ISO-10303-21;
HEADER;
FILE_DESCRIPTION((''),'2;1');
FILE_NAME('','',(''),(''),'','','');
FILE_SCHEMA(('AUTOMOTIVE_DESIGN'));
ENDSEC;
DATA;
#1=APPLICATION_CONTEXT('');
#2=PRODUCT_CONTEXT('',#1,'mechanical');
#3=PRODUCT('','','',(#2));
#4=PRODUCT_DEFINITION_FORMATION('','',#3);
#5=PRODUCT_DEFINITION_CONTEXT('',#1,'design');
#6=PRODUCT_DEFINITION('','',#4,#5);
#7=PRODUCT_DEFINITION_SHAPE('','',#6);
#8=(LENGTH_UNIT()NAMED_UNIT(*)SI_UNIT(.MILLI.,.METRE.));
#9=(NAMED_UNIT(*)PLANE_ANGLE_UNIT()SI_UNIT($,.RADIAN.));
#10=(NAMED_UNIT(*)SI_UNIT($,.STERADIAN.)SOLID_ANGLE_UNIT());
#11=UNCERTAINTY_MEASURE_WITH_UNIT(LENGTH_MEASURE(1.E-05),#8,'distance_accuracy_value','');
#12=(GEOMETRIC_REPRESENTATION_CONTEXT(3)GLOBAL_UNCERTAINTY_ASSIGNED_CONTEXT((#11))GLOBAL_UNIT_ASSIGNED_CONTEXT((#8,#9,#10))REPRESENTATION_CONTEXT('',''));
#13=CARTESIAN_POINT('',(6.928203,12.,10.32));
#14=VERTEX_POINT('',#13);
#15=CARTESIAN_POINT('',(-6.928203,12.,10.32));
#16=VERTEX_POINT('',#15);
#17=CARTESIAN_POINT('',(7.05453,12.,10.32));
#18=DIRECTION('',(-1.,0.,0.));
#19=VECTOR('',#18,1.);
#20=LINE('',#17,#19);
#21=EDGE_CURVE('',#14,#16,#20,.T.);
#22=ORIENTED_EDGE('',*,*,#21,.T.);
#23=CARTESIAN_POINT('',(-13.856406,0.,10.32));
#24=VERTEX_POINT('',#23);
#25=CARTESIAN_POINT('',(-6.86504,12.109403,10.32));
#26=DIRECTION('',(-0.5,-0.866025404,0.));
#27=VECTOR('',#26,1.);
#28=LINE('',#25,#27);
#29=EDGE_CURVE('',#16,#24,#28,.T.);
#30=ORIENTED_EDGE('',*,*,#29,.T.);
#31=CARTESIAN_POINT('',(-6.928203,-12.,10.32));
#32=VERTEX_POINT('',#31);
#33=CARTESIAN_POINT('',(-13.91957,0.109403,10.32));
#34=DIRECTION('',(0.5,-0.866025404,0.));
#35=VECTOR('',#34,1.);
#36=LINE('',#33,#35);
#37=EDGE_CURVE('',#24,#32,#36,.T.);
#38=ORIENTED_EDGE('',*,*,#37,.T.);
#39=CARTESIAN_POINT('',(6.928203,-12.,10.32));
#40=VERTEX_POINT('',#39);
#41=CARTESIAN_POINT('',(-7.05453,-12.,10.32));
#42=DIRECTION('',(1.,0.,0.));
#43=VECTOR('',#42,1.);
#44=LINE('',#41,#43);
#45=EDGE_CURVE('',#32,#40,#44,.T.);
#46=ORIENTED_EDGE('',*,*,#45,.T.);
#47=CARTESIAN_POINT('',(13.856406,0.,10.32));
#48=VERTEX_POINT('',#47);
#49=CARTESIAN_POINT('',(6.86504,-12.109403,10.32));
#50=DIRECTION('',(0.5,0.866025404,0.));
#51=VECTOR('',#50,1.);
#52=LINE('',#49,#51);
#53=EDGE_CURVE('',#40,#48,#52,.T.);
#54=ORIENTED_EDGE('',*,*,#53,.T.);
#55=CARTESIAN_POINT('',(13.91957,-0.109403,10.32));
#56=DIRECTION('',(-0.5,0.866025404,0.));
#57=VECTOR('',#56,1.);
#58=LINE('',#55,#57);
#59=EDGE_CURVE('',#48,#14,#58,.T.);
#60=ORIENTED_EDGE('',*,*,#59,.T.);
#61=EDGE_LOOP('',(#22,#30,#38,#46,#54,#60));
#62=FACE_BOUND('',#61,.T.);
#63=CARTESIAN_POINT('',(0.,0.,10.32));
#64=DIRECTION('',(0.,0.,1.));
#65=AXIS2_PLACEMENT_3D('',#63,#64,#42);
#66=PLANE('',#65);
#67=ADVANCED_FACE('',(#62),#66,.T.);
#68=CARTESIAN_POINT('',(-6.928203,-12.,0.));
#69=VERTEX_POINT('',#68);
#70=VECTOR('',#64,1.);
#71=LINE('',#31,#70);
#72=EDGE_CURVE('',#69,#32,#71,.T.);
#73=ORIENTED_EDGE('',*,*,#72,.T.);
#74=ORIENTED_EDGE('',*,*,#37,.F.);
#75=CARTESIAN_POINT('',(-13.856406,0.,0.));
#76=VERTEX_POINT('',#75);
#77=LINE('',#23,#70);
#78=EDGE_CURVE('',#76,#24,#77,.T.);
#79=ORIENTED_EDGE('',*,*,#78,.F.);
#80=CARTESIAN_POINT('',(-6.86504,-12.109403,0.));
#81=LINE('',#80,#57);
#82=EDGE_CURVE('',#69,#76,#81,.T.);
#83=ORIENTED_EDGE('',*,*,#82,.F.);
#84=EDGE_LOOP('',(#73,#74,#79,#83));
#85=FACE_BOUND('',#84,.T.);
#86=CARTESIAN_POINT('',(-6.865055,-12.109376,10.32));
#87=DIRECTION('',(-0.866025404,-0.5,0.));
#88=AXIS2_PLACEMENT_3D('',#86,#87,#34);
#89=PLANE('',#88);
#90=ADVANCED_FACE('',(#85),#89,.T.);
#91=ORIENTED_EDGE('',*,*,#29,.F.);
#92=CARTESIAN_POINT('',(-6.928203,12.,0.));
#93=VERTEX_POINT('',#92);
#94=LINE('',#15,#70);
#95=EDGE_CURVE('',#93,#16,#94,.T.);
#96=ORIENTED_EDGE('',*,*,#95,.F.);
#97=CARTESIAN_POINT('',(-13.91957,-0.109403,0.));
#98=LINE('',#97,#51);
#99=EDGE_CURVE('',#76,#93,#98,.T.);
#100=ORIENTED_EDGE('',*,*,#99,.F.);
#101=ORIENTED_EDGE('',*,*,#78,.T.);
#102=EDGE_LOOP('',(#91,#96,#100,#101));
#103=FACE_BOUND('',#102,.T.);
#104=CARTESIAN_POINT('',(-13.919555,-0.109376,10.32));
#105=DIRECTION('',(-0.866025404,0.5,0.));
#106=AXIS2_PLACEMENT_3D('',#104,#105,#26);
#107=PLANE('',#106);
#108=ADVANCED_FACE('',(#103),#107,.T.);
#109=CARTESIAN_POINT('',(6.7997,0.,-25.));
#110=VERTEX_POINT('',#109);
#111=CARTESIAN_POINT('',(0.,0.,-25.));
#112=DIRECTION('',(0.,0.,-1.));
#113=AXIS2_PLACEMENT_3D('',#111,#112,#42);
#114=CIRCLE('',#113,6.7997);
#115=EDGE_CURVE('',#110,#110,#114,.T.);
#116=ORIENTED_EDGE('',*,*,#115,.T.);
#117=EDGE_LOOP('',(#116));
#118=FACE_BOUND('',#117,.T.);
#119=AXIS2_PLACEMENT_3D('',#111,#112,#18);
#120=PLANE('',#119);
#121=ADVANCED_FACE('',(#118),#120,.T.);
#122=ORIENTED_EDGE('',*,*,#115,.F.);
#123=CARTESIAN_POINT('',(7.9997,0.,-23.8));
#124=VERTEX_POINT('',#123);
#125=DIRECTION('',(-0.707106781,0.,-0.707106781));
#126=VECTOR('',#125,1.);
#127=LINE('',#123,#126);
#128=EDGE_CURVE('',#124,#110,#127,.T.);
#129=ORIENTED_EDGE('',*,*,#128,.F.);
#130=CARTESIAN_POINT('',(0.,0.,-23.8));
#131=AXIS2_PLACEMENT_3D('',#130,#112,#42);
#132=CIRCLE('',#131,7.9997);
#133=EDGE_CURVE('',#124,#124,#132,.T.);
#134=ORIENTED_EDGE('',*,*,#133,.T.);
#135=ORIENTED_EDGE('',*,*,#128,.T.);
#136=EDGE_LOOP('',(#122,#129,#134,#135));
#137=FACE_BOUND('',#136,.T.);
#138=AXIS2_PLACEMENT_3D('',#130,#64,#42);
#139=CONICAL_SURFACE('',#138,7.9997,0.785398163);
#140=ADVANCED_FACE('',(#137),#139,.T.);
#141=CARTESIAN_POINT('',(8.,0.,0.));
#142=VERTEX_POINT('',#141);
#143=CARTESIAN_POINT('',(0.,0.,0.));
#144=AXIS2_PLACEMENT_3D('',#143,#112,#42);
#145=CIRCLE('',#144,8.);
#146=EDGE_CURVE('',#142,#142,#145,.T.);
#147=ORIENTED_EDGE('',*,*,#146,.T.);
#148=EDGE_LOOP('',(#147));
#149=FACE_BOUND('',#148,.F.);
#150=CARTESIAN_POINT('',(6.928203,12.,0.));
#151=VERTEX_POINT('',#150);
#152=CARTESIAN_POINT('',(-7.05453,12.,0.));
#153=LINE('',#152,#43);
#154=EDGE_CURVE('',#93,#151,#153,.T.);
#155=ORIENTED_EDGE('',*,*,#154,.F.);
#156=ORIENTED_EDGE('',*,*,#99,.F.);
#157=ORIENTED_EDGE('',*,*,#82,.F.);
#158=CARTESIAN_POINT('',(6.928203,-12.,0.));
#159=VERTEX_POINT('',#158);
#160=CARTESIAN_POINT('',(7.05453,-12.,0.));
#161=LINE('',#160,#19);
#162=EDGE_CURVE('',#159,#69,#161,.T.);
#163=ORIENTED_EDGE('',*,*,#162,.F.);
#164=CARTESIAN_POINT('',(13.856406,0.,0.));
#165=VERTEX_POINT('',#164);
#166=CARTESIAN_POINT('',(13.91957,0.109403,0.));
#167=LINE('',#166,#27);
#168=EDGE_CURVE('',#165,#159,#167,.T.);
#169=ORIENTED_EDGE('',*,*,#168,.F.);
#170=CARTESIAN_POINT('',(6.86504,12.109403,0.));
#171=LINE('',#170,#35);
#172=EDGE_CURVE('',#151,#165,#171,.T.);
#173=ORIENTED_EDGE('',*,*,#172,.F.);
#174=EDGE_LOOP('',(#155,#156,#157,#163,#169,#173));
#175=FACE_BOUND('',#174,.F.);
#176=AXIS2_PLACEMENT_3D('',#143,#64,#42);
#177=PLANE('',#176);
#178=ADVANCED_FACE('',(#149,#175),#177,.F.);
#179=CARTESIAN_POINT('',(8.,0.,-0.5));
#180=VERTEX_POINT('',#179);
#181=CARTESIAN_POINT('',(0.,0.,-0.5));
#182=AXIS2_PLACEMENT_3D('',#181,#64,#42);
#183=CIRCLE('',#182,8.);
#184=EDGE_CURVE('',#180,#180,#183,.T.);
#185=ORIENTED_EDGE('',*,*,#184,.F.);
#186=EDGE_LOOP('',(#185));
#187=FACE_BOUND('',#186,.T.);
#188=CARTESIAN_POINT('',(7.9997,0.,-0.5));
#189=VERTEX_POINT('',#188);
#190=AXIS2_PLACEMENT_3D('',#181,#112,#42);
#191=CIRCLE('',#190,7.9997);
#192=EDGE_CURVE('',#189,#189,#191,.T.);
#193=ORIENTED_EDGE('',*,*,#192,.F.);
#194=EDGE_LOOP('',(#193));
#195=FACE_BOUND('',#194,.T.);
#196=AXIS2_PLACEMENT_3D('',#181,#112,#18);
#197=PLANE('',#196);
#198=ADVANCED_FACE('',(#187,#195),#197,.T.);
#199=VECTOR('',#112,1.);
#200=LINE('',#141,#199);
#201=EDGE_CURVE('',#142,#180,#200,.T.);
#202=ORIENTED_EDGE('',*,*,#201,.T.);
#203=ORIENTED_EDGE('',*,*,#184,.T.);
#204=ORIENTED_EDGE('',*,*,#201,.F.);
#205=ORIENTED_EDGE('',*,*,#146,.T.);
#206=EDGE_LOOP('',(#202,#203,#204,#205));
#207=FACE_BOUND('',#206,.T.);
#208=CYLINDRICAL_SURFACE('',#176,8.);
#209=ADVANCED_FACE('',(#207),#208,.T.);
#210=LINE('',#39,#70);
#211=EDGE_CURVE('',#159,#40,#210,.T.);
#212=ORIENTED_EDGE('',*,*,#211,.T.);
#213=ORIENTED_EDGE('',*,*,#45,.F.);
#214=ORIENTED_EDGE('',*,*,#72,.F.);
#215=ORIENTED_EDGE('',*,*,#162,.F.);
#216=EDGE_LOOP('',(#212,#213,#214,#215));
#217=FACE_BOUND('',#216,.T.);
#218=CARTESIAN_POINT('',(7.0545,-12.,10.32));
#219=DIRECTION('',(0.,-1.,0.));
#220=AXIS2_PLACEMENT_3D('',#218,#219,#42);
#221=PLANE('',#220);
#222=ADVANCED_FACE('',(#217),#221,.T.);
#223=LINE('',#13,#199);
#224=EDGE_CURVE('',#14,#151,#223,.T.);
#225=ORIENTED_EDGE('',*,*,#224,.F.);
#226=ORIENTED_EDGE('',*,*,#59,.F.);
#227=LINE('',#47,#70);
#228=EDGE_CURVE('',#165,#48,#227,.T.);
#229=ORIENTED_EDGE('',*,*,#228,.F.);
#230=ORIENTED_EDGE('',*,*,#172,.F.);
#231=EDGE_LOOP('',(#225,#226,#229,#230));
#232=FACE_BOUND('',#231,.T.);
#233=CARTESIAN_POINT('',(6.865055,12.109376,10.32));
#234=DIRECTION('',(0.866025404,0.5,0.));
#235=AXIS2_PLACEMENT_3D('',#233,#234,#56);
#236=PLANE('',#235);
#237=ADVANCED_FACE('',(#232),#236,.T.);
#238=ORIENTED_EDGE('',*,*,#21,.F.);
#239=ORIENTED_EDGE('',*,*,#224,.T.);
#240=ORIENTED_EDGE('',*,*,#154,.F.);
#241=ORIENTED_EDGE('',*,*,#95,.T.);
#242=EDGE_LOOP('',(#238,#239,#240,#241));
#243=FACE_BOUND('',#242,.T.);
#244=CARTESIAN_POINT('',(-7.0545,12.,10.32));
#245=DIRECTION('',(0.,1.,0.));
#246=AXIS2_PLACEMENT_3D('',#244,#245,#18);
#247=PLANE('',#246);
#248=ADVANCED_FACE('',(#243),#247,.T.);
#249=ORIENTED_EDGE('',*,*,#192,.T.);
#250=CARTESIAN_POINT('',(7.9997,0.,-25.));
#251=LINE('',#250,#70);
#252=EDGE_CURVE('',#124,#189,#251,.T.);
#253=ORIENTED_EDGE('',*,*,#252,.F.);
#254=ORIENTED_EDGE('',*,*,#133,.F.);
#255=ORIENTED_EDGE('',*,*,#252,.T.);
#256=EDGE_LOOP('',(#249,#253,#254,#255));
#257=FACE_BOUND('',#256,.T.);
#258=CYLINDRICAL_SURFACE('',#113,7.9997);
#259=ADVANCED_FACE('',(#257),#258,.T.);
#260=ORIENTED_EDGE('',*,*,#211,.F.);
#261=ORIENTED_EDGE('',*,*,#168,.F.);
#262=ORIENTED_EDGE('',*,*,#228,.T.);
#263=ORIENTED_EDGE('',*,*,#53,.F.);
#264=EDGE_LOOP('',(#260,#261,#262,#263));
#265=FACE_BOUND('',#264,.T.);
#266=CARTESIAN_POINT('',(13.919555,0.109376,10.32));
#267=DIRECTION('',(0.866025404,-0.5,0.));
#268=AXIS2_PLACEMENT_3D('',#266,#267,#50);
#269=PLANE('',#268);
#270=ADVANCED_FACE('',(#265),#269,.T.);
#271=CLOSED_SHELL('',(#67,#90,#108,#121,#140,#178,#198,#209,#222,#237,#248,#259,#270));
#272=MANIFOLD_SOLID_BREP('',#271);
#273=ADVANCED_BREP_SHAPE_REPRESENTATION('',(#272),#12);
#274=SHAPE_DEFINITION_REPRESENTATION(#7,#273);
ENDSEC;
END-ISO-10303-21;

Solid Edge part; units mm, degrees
sketch "Sketch1" plane through (0, 0, 0) normal (0, 0, 1) x (1, 0, 0)
  circle A0 centre (0, 0) radius 13.92
  dimension "D1" = 27.84
extrude "Protrusion1" add sketch "Sketch1" along normal blind 10.32
sketch "Sketch2" plane through (0, 0, 0) normal (0, 0, -1) x (1, 0, 0)
  circle A0 centre (0, 0) radius 8
extrude "Protrusion2" add sketch "Sketch2" along normal blind 25
sketch "Sketch3" plane through (0, 0, -25) normal (0, 0, -1) x (1, 0, 0)
  circle A0 centre (0, 0) radius 7.9997
extrude "Cutout1" cut sketch "Sketch3" against normal blind 24.5 flip side to cut
chamfer "Chamfer_1" distance 1.2 angle 45 1 edges at (-7.9997, 0, -25)
sketch "Sketch4" plane through (0, 0, 10.32) normal (0, 0, 1) x (1, 0, 0)
  line L0 (-7.0545, 12) -> (7.0545, 12)
  dimension "D1" = 24
extrude "Cutout2" cut sketch "Sketch4" against normal up to next material side at (0, 12.05, 10.32)
pattern_circular "Pattern1" count 6 over 360 about axis through (0, 0, 10.32) along (0, 0, 1) of "Cutout2"
properties part number "108101"
